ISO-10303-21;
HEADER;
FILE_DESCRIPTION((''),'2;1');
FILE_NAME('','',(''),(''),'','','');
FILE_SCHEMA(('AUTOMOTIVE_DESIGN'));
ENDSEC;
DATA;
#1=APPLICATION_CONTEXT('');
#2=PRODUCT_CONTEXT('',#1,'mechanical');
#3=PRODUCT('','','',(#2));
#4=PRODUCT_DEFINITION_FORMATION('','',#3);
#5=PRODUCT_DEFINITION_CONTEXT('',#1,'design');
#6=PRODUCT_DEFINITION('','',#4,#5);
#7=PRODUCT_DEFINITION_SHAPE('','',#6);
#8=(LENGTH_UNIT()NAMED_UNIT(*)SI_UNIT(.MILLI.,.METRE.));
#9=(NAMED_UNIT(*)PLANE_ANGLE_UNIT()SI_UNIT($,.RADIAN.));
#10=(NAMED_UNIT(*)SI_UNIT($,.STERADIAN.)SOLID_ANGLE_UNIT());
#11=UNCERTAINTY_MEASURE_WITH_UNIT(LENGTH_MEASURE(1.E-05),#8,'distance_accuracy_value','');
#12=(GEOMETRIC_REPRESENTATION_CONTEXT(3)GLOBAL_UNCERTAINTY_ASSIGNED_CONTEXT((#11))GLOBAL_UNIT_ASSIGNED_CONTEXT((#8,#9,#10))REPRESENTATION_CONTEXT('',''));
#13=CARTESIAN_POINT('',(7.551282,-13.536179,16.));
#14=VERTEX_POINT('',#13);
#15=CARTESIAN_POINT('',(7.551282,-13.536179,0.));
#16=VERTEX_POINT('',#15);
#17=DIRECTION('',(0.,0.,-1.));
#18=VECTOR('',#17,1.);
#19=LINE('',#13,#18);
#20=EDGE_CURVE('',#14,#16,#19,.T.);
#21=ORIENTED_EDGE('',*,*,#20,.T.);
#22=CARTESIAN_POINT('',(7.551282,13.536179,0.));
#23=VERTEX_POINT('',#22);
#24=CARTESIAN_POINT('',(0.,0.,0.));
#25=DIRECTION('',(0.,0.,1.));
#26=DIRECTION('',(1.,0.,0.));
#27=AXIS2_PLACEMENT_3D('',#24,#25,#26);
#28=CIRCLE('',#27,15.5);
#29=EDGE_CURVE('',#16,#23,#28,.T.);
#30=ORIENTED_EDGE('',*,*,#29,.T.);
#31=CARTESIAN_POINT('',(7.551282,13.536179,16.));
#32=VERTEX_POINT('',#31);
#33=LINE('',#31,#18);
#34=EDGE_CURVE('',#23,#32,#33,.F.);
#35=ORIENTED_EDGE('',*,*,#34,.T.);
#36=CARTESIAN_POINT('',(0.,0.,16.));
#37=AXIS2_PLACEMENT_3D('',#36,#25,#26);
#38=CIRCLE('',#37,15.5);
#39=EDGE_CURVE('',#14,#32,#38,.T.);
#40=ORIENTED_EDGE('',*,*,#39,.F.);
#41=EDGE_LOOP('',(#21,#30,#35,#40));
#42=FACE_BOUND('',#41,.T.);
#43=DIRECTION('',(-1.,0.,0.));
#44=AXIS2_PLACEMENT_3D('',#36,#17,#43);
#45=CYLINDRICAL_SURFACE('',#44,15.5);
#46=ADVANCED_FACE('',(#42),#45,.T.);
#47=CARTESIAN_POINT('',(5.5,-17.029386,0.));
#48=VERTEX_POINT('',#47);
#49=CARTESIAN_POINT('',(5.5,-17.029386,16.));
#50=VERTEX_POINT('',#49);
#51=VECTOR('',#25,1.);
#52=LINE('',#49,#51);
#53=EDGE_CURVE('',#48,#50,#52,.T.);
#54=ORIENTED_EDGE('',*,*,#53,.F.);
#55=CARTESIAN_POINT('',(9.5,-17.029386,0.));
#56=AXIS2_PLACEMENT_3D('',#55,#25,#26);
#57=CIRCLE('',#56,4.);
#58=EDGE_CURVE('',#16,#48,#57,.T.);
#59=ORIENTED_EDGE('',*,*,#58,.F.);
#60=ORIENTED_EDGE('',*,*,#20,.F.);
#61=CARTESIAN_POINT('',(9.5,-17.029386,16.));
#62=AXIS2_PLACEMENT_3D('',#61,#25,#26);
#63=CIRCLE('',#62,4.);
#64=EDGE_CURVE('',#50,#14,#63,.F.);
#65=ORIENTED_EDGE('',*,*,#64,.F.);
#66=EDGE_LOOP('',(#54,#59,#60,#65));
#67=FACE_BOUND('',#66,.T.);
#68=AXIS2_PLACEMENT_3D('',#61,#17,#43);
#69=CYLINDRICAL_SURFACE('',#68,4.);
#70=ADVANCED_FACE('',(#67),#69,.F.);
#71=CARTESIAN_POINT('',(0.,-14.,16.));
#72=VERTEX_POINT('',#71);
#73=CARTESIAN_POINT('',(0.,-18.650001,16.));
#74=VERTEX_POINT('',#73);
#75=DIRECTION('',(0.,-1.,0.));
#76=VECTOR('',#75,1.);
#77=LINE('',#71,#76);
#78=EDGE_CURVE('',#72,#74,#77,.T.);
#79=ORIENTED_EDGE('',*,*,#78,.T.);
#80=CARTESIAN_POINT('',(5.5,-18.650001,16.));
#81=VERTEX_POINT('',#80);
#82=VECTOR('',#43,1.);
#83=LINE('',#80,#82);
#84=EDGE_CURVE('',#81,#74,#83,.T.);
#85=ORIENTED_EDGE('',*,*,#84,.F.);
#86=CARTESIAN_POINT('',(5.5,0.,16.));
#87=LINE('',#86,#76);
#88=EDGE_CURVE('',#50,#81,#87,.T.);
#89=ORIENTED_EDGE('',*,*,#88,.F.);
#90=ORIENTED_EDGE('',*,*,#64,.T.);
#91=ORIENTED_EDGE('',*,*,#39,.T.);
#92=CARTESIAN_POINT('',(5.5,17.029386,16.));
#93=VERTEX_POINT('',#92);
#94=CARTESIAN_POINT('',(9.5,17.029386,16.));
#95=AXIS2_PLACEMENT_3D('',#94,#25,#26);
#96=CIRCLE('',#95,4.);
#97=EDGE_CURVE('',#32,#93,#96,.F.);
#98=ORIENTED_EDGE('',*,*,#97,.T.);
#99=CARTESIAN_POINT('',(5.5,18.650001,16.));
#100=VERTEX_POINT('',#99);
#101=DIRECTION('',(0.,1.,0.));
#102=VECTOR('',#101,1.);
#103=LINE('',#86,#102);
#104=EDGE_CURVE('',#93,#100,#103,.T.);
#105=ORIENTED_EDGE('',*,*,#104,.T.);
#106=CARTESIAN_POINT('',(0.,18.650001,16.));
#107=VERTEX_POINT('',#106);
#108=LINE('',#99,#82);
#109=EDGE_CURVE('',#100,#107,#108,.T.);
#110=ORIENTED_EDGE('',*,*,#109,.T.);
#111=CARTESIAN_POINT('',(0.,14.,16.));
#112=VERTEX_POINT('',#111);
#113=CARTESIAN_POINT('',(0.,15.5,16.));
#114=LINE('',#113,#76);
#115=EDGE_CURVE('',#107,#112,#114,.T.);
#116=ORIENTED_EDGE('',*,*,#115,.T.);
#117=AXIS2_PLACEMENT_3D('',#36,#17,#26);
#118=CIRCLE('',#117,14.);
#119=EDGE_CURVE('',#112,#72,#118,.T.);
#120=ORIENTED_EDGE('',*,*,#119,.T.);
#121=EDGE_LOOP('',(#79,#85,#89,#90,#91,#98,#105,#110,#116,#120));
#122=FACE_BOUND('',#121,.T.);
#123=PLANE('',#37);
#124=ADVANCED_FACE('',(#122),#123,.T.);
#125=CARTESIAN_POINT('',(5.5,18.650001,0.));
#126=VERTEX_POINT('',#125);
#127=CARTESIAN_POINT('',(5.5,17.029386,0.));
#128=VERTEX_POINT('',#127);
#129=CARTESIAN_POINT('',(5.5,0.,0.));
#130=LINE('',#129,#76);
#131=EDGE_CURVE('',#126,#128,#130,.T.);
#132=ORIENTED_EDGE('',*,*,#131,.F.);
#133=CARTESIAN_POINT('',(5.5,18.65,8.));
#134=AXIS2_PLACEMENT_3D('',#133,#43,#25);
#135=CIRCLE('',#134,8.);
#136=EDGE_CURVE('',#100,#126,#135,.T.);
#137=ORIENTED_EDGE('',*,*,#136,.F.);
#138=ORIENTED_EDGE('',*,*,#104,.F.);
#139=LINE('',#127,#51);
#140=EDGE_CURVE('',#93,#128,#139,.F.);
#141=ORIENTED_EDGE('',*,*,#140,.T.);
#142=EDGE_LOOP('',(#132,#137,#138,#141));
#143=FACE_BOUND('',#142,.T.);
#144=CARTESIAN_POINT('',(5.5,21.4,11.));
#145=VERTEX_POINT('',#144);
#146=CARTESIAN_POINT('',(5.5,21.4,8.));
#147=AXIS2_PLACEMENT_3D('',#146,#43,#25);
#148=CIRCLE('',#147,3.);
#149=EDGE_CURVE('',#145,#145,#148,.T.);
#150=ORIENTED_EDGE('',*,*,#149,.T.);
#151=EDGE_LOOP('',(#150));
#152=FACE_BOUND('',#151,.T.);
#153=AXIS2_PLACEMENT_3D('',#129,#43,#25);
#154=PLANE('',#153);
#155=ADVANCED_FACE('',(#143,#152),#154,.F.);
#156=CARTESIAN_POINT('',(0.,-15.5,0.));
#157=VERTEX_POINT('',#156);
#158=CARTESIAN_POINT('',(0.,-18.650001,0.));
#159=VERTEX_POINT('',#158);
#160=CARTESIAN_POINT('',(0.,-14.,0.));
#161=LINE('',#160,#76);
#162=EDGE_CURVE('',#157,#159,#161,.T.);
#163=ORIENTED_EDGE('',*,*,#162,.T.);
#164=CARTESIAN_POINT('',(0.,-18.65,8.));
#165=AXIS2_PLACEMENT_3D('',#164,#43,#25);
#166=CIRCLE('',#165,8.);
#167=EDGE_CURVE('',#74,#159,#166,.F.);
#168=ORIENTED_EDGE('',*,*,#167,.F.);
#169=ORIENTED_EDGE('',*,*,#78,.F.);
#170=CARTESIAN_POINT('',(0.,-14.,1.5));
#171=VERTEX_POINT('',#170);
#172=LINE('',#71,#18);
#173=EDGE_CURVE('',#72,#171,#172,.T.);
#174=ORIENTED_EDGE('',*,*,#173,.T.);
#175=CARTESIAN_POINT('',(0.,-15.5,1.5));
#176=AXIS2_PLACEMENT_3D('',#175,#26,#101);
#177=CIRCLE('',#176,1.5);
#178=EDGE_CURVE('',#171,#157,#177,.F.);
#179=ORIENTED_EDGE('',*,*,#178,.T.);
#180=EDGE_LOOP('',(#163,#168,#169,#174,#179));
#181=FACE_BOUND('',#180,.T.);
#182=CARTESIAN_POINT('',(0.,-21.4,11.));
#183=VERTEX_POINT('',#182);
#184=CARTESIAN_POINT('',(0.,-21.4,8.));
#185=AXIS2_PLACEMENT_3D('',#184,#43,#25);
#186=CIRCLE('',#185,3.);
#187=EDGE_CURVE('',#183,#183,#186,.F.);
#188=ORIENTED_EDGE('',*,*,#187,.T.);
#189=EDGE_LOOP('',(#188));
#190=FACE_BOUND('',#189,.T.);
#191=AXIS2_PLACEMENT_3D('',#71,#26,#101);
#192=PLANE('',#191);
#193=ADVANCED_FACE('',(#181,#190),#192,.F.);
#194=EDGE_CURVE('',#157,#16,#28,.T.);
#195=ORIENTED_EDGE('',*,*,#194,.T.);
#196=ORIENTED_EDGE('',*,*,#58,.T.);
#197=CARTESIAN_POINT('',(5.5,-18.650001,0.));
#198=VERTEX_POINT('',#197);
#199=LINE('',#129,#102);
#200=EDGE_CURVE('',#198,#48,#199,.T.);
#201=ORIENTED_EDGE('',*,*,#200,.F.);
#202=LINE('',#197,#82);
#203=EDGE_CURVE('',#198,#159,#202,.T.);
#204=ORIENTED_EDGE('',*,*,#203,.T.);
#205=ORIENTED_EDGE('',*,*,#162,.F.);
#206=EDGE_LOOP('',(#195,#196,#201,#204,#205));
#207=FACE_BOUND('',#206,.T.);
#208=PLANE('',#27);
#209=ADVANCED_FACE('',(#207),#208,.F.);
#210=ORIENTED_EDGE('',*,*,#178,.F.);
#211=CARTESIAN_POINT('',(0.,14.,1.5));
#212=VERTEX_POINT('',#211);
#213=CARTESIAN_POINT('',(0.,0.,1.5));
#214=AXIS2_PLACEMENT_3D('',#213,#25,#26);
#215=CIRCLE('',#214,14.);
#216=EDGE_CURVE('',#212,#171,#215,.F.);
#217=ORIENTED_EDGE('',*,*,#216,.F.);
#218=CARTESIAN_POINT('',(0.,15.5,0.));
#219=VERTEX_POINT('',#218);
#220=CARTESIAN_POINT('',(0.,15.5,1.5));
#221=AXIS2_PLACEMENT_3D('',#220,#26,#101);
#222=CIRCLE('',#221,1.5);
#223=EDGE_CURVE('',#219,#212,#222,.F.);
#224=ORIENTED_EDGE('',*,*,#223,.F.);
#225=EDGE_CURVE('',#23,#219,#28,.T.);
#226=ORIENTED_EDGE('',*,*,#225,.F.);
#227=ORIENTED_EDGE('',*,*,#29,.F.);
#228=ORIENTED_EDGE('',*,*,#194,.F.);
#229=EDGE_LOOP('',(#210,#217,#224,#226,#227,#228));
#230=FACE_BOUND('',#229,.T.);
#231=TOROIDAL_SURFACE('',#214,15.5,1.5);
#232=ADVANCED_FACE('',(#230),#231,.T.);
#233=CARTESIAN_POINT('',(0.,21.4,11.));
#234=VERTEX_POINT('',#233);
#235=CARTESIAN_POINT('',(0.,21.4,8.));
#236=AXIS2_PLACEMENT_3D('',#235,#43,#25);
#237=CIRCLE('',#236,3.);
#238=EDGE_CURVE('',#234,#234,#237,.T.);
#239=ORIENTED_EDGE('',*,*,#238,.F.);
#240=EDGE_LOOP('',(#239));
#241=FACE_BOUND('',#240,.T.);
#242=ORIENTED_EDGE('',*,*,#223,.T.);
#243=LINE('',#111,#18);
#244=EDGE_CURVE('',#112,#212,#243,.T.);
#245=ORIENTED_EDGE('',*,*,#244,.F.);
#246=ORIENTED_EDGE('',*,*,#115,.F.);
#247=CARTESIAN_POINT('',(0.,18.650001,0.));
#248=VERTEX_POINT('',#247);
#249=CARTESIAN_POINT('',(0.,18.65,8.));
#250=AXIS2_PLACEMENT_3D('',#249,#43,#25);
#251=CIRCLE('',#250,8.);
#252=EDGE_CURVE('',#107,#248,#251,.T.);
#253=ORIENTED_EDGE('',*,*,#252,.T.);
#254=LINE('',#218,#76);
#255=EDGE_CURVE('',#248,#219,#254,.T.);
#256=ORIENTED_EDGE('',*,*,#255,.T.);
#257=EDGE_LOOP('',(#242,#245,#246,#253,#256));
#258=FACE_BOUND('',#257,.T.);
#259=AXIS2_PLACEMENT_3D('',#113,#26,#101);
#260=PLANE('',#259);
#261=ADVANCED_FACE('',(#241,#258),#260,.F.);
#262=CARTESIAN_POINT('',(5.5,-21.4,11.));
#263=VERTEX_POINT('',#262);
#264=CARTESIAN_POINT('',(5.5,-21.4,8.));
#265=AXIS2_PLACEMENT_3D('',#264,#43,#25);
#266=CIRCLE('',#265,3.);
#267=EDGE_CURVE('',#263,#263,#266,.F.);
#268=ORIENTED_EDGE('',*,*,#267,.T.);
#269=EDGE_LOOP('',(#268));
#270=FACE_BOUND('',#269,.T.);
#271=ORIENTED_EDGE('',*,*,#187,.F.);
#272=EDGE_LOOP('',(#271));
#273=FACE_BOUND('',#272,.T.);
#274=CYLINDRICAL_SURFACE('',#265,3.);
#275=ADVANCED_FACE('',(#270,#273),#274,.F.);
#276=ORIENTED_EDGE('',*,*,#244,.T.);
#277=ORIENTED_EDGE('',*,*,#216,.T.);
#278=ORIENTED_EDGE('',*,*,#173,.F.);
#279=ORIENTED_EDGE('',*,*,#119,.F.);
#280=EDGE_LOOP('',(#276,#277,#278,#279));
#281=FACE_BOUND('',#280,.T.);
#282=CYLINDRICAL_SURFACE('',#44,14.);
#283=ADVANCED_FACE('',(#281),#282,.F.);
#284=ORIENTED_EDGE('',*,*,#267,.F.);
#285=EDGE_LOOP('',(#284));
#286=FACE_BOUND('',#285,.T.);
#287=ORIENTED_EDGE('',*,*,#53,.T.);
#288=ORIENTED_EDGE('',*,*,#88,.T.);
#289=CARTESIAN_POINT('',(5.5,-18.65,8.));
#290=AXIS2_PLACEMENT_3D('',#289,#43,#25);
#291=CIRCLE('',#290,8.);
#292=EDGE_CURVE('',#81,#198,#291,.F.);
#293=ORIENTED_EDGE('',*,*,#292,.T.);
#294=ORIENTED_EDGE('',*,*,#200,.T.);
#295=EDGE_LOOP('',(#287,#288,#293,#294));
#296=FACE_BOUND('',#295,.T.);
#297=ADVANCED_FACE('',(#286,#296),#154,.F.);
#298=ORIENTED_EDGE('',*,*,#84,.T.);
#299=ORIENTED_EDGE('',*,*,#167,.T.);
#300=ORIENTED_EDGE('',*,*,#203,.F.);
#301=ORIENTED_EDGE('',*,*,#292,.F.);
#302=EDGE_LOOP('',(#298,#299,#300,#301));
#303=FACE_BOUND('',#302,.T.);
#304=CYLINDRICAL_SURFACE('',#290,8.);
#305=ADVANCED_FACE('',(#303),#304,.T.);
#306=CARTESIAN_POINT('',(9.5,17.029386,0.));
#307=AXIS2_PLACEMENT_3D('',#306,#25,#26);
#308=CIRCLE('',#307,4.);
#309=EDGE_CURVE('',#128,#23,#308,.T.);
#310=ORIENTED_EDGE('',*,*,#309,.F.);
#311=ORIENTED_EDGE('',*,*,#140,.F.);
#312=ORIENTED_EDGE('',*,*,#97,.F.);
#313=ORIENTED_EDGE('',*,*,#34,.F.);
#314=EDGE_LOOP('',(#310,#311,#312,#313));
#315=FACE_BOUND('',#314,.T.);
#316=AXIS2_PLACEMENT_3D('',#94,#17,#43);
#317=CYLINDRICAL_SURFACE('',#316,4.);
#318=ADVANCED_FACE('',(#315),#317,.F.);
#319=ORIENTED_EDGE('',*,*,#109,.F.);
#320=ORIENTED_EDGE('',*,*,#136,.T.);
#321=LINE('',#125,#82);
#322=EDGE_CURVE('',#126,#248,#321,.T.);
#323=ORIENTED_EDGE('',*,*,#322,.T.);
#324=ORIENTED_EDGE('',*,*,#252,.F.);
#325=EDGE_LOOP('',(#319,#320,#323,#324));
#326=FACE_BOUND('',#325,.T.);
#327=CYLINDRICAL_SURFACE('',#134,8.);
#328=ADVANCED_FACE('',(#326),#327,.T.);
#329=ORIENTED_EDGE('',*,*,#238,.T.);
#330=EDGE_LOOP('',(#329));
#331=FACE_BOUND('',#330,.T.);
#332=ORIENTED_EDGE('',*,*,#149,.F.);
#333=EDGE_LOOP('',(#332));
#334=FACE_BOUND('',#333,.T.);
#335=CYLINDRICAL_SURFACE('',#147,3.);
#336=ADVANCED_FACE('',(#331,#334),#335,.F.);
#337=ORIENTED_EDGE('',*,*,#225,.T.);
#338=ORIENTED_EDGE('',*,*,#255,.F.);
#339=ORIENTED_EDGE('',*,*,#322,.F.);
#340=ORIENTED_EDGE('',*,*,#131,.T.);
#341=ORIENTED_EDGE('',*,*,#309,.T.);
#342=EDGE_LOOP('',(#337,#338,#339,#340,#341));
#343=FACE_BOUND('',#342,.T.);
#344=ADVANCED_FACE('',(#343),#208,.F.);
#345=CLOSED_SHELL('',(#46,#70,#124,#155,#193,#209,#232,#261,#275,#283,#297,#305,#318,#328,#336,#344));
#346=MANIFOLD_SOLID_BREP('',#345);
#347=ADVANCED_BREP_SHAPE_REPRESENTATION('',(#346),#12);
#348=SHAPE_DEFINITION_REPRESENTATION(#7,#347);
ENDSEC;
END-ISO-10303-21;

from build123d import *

# Parameters (mm, degrees)
DODANIE_WYCI_GNI_CIE1_DEPTH = 16
SZKIC2_R                    = 3
DODANIE_WYCI_GNI_CIE2_DEPTH = 5.5
ZAOKR_GLENIE1_R             = 1.5
ZAOKR_GLENIE2_R             = 4


with BuildPart() as part:
    # Szkic1 → Dodanie-wyciągnięcie1 (new body)
    with BuildSketch(Plane.XY):
        with BuildLine():
            Line((0, 15.5), (0, 14))
            ThreePointArc((0, 14), (14, 0), (0, -14))
            Line((0, -14), (0, -15.5))
            ThreePointArc((0, -15.5), (15.5, 0), (0, 15.5))
        make_face()
    extrude(amount=DODANIE_WYCI_GNI_CIE1_DEPTH)

    # Szkic2 → Dodanie-wyciągnięcie2 (add)
    # profile 1 of 2: a face of its own
    with BuildSketch(Plane.ZY):
        with BuildLine():
            ThreePointArc((16, 18.650000915), (8, 26.65), (0, 18.650000915))
            Line((0, 18.650000915), (0, 14))
            Line((0, 14), (16, 14))
            Line((16, 14), (16, 18.650000915))
        make_face()
        with Locations((8, 21.4)):
            Circle(SZKIC2_R, mode=Mode.SUBTRACT)
    # profile 2 of 2: a face of its own
    with BuildSketch(Plane.ZY):
        with BuildLine():
            Line((16, -18.650000915), (16, -14))
            Line((16, -14), (0, -14))
            Line((0, -14), (0, -18.650000915))
            ThreePointArc((0, -18.650000915), (8, -26.65), (16, -18.650000915))
        make_face()
        with Locations((8, -21.4)):
            Circle(SZKIC2_R, mode=Mode.SUBTRACT)
    extrude(amount=-DODANIE_WYCI_GNI_CIE2_DEPTH)

    # Zaokrąglenie1
    zaokr_glenie1_edges = [part.edges().sort_by_distance(p)[0] for p in [
        (14, 0, 0),
    ]]
    fillet(zaokr_glenie1_edges, radius=ZAOKR_GLENIE1_R - 0.0001)  # a hair under: the kernel refuses the full size

    # Zaokrąglenie2
    zaokr_glenie2_edges = [part.edges().sort_by_distance(p)[0] for p in [
        (5.5, -14.491376746, 8),
        (5.5, 14.491376746, 8),
    ]]
    fillet(zaokr_glenie2_edges, radius=ZAOKR_GLENIE2_R)


solid = part.part
